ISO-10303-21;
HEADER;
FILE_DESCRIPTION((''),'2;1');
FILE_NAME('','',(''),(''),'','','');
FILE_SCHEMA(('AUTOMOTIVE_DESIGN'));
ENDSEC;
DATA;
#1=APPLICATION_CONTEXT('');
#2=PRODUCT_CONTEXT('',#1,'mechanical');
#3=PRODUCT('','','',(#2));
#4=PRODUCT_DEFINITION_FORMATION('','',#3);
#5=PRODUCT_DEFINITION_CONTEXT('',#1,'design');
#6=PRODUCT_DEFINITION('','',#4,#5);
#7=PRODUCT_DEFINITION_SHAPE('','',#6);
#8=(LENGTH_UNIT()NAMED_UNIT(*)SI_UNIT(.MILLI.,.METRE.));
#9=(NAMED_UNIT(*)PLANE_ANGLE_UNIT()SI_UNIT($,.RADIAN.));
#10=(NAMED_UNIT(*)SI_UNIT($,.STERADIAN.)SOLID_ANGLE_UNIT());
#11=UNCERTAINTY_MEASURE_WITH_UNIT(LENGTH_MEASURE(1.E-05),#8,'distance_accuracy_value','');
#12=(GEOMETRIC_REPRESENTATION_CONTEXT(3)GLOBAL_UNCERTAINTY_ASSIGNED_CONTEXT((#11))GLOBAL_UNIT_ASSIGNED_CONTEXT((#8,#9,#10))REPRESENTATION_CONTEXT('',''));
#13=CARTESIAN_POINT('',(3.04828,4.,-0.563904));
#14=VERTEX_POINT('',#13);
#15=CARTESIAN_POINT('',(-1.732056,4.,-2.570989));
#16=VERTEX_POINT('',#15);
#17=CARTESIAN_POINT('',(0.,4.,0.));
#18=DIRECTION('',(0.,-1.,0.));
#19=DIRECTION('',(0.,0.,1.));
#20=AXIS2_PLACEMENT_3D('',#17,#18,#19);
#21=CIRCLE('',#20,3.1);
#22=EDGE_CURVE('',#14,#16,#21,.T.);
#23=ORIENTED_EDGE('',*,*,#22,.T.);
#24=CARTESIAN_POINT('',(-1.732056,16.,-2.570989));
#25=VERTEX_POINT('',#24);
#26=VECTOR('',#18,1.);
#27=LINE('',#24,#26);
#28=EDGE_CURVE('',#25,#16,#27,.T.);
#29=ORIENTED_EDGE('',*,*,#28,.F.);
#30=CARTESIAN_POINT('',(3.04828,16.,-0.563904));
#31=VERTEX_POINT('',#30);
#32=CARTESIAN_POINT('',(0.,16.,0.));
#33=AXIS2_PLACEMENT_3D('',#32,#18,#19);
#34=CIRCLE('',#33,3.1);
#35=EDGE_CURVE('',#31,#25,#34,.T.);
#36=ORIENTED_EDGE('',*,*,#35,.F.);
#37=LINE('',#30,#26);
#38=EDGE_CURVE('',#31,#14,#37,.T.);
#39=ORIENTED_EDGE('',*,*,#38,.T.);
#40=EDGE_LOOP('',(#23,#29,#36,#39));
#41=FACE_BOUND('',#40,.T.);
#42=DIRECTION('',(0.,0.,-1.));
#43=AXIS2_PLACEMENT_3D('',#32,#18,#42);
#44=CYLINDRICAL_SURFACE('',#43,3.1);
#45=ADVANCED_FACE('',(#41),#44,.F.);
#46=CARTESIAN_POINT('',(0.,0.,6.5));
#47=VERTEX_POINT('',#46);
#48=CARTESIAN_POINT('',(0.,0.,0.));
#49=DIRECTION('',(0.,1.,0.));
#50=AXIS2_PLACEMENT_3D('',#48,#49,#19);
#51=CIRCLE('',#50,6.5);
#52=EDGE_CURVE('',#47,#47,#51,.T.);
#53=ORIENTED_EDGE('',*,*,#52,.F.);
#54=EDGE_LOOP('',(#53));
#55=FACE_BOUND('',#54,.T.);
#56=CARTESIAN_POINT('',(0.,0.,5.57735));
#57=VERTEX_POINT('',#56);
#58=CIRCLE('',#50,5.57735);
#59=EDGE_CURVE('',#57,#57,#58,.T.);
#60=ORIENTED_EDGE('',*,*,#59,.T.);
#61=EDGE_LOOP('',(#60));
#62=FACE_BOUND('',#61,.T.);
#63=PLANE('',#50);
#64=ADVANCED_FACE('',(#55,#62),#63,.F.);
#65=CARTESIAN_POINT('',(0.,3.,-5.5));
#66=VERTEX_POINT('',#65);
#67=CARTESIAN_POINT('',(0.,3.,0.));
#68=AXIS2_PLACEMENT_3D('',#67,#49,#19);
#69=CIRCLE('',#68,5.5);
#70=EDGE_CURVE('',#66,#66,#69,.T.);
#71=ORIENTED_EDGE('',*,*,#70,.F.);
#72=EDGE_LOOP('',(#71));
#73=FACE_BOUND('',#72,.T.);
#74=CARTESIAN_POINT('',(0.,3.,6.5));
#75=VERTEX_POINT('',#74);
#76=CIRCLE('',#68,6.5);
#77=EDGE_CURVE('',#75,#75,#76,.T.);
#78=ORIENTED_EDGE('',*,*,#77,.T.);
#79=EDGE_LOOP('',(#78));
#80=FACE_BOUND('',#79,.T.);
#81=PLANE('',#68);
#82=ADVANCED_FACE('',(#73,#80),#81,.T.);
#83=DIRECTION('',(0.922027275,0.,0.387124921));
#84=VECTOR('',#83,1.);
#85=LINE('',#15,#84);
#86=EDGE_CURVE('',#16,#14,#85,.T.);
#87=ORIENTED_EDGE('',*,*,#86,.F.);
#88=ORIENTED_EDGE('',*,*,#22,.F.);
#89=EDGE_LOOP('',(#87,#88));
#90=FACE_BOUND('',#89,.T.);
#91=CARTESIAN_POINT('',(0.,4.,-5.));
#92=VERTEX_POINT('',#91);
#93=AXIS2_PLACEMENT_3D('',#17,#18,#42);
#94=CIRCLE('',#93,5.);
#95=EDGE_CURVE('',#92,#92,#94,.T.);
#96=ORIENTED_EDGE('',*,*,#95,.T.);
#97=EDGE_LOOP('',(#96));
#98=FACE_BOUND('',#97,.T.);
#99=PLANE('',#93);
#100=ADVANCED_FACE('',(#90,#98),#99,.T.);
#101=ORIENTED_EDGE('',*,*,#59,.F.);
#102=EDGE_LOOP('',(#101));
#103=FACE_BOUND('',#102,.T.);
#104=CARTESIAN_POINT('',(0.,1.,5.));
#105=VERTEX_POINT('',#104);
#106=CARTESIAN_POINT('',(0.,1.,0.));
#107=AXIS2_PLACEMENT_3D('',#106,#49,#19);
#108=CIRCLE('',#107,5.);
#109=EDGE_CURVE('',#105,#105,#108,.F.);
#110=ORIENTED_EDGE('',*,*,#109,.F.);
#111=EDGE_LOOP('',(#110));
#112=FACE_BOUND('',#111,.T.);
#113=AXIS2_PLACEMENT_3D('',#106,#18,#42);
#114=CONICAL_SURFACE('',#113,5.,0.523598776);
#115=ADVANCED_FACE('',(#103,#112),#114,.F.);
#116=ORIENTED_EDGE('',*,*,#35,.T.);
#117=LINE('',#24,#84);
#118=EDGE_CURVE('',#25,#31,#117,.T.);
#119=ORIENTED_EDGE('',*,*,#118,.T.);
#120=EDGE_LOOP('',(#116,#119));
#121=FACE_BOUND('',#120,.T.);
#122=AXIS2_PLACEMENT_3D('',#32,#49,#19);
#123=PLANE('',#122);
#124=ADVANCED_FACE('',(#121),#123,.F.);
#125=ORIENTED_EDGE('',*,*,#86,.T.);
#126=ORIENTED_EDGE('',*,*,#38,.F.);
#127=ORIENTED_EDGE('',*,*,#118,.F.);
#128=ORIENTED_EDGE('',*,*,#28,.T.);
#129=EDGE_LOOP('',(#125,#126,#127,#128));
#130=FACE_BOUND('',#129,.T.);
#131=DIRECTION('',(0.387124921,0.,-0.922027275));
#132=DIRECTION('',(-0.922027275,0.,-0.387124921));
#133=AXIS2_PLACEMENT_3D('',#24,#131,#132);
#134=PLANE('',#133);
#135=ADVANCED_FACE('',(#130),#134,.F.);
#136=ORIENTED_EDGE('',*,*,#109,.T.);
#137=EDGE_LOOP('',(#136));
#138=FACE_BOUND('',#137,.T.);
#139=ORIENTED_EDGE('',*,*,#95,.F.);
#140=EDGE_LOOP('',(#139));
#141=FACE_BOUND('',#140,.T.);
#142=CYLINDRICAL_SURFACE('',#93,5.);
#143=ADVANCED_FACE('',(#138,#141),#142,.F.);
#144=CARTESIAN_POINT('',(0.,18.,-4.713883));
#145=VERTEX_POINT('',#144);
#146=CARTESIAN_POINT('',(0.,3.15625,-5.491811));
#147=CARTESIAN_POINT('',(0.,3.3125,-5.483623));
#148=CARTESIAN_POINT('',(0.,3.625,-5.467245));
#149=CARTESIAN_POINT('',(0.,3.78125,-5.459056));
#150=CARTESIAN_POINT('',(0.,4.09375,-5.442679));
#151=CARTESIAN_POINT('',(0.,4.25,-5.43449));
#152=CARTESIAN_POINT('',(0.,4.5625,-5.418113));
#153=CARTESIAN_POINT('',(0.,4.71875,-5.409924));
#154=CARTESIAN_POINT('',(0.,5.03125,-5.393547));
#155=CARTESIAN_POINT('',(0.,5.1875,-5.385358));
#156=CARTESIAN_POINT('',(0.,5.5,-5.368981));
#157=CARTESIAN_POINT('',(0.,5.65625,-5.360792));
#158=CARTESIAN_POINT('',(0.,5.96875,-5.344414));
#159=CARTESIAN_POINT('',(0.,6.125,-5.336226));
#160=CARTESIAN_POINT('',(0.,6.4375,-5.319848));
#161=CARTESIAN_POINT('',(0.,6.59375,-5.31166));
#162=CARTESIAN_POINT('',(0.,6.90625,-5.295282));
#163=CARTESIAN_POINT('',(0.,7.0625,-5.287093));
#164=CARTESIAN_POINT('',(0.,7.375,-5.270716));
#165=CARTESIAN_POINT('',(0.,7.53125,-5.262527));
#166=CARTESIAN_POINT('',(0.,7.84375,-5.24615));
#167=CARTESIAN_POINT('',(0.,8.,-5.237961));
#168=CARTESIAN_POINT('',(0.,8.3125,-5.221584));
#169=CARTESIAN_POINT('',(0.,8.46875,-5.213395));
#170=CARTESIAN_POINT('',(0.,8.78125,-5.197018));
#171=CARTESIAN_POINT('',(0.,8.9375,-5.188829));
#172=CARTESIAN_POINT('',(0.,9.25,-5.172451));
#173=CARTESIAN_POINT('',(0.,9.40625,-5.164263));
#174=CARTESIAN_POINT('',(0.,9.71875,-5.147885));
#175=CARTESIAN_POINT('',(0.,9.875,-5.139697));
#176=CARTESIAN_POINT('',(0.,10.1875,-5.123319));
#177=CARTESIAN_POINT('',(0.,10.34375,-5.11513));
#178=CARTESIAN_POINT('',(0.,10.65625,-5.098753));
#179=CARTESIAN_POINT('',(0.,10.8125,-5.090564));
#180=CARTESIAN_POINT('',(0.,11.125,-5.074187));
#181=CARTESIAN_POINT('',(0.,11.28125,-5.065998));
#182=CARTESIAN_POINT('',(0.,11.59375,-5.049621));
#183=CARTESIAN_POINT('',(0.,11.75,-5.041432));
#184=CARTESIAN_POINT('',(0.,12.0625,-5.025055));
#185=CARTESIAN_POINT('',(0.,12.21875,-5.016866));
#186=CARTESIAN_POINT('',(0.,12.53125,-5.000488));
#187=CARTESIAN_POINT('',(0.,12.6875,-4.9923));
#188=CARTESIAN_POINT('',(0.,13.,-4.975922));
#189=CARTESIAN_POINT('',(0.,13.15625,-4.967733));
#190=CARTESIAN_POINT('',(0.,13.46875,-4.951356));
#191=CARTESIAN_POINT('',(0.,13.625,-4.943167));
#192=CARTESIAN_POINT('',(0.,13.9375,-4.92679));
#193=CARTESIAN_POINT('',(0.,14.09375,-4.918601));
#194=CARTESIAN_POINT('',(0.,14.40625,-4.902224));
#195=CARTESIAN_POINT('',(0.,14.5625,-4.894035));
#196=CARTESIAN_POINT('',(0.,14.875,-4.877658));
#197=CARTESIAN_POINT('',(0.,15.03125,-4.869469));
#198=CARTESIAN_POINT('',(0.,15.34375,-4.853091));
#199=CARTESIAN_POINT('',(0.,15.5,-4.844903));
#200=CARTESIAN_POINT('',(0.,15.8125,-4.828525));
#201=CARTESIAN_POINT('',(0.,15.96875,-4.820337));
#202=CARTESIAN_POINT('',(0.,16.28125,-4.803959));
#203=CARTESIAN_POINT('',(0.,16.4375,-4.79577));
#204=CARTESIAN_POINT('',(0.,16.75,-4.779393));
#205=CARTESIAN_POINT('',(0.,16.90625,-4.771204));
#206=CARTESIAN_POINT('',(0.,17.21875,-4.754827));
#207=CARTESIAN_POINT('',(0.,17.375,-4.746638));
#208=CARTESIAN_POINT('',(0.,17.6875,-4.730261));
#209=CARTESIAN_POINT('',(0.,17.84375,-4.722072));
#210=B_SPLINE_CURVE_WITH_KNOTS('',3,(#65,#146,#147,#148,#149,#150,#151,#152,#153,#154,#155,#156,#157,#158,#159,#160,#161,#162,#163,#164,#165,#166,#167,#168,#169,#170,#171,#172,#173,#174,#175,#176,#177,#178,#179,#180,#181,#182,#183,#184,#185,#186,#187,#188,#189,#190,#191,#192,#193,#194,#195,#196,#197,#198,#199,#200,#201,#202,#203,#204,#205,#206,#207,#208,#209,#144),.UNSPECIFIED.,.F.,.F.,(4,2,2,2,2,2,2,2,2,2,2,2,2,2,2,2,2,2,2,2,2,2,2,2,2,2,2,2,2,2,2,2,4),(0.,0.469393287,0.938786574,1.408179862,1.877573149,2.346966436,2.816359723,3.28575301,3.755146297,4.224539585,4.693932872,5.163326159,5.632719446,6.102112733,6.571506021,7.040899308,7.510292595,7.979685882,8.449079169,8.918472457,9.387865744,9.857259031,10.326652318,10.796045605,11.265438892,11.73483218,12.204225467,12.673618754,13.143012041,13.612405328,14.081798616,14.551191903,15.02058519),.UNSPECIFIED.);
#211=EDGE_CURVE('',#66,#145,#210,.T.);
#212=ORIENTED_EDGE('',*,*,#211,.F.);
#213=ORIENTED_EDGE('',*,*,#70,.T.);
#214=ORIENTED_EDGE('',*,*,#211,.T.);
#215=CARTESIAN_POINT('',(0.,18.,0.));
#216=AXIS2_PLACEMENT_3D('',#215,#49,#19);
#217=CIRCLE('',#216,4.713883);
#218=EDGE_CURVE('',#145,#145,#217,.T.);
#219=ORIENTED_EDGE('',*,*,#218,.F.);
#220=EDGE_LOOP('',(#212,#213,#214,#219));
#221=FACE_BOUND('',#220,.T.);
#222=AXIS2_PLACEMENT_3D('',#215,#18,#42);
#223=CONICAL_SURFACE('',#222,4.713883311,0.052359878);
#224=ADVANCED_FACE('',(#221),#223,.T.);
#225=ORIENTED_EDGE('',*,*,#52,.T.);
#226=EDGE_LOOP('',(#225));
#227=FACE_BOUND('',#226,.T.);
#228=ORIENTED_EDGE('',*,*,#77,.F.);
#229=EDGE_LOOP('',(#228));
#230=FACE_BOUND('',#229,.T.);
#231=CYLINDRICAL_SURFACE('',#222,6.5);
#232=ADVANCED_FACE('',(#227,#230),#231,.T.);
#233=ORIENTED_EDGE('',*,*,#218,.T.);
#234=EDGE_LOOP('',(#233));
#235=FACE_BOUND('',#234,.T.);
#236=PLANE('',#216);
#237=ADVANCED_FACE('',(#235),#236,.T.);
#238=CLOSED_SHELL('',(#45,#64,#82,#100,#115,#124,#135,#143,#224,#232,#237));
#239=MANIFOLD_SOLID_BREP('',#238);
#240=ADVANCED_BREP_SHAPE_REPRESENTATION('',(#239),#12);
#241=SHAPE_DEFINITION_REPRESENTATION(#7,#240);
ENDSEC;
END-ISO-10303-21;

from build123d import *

# Parameters (mm, degrees)
SKETCH1_R           = 6.5
BOSS_EXTRUDE1_DEPTH = 18
SKETCH2_R           = 5
CUT_EXTRUDE1_DEPTH  = 4
CUT_EXTRUDE2_DEPTH  = 12
CHAMFER1_SIZE       = 1
CHAMFER1_SIZE2      = 0.577350269
SKETCH4_OUTSIDE_W   = 20.146
SKETCH4_OUTSIDE_H   = 20.146
SKETCH4_OUTSIDE_R   = 5.5
CUT_EXTRUDE3_DEPTH  = 15
CHAMFER2_SIZE       = 15
CHAMFER2_SIZE_2     = 0.786116689


with BuildPart() as part:
    # Sketch1 → Boss-Extrude1 (new body)
    with BuildSketch(Plane(origin=(0, 0, 0), x_dir=(1, 0, 0), z_dir=(0, 1, 0))):
        with Locations(Location((0, 0, 0), (0, 0, 270))):
            Circle(SKETCH1_R)
    extrude(amount=BOSS_EXTRUDE1_DEPTH)

    # Sketch2 → Cut-Extrude1 (cut)
    with BuildSketch(Plane.XZ):
        with Locations(Location((0, 0, 0), (0, 0, 270))):
            Circle(SKETCH2_R)
    extrude(amount=-CUT_EXTRUDE1_DEPTH, mode=Mode.SUBTRACT)

    # Sketch3 → Cut-Extrude2 (cut)
    with BuildSketch(Plane.XZ.offset(-4)):
        with BuildLine():
            Line((-1.732055507, -2.57098886), (3.04828024, -0.563903873))
            ThreePointArc((3.04828024, -0.563903873), (-1.200087257, 2.858284551), (-1.732055507, -2.57098886))
        make_face()
    extrude(amount=-CUT_EXTRUDE2_DEPTH, mode=Mode.SUBTRACT)

    # Chamfer1
    chamfer1_edges = [part.edges().sort_by_distance(p)[0] for p in [
        (0, 0, 5),
    ]]
    chamfer1_side = [part.faces().sort_by_distance(p)[0] for p in [
        (0, 2, 5),
    ]]
    chamfer(chamfer1_edges, length=CHAMFER1_SIZE, length2=CHAMFER1_SIZE2, reference=chamfer1_side[0])

    # Sketch4 outside → Cut-Extrude3 (cut)
    with BuildSketch(Plane(origin=(0, 18, 0), x_dir=(1, 0, 0), z_dir=(0, 1, 0))):
        Rectangle(SKETCH4_OUTSIDE_W, SKETCH4_OUTSIDE_H)
        with Locations(Location((0, 0, 0), (0, 0, 270))):
            Circle(SKETCH4_OUTSIDE_R, mode=Mode.SUBTRACT)
    extrude(amount=-CUT_EXTRUDE3_DEPTH, mode=Mode.SUBTRACT)

    # Chamfer2
    # the kernel refuses this chamfer: 15, 0.786116689 mm, written as the material it takes off along each edge
    with BuildSketch(Plane(origin=(0, 18, 0), x_dir=(0, 0, 1), z_dir=(-1, 0, 0))) as chamfer2_piece_1_section:
        Polygon((5.5, -CHAMFER2_SIZE), (5.5 - CHAMFER2_SIZE_2, 0), (5.5, 0), align=None)
    chamfer2_piece_1 = revolve(axis=Axis((0, 18, 0), (0, 1, 0)), mode=Mode.PRIVATE)
    chamfer2_piece_1 = split(chamfer2_piece_1, bisect_by=Plane(origin=(0, 3, -5.162730795), z_dir=(0, 1, 0)), keep=Keep.TOP, mode=Mode.PRIVATE)
    add(chamfer2_piece_1, mode=Mode.SUBTRACT)


solid = part.part
